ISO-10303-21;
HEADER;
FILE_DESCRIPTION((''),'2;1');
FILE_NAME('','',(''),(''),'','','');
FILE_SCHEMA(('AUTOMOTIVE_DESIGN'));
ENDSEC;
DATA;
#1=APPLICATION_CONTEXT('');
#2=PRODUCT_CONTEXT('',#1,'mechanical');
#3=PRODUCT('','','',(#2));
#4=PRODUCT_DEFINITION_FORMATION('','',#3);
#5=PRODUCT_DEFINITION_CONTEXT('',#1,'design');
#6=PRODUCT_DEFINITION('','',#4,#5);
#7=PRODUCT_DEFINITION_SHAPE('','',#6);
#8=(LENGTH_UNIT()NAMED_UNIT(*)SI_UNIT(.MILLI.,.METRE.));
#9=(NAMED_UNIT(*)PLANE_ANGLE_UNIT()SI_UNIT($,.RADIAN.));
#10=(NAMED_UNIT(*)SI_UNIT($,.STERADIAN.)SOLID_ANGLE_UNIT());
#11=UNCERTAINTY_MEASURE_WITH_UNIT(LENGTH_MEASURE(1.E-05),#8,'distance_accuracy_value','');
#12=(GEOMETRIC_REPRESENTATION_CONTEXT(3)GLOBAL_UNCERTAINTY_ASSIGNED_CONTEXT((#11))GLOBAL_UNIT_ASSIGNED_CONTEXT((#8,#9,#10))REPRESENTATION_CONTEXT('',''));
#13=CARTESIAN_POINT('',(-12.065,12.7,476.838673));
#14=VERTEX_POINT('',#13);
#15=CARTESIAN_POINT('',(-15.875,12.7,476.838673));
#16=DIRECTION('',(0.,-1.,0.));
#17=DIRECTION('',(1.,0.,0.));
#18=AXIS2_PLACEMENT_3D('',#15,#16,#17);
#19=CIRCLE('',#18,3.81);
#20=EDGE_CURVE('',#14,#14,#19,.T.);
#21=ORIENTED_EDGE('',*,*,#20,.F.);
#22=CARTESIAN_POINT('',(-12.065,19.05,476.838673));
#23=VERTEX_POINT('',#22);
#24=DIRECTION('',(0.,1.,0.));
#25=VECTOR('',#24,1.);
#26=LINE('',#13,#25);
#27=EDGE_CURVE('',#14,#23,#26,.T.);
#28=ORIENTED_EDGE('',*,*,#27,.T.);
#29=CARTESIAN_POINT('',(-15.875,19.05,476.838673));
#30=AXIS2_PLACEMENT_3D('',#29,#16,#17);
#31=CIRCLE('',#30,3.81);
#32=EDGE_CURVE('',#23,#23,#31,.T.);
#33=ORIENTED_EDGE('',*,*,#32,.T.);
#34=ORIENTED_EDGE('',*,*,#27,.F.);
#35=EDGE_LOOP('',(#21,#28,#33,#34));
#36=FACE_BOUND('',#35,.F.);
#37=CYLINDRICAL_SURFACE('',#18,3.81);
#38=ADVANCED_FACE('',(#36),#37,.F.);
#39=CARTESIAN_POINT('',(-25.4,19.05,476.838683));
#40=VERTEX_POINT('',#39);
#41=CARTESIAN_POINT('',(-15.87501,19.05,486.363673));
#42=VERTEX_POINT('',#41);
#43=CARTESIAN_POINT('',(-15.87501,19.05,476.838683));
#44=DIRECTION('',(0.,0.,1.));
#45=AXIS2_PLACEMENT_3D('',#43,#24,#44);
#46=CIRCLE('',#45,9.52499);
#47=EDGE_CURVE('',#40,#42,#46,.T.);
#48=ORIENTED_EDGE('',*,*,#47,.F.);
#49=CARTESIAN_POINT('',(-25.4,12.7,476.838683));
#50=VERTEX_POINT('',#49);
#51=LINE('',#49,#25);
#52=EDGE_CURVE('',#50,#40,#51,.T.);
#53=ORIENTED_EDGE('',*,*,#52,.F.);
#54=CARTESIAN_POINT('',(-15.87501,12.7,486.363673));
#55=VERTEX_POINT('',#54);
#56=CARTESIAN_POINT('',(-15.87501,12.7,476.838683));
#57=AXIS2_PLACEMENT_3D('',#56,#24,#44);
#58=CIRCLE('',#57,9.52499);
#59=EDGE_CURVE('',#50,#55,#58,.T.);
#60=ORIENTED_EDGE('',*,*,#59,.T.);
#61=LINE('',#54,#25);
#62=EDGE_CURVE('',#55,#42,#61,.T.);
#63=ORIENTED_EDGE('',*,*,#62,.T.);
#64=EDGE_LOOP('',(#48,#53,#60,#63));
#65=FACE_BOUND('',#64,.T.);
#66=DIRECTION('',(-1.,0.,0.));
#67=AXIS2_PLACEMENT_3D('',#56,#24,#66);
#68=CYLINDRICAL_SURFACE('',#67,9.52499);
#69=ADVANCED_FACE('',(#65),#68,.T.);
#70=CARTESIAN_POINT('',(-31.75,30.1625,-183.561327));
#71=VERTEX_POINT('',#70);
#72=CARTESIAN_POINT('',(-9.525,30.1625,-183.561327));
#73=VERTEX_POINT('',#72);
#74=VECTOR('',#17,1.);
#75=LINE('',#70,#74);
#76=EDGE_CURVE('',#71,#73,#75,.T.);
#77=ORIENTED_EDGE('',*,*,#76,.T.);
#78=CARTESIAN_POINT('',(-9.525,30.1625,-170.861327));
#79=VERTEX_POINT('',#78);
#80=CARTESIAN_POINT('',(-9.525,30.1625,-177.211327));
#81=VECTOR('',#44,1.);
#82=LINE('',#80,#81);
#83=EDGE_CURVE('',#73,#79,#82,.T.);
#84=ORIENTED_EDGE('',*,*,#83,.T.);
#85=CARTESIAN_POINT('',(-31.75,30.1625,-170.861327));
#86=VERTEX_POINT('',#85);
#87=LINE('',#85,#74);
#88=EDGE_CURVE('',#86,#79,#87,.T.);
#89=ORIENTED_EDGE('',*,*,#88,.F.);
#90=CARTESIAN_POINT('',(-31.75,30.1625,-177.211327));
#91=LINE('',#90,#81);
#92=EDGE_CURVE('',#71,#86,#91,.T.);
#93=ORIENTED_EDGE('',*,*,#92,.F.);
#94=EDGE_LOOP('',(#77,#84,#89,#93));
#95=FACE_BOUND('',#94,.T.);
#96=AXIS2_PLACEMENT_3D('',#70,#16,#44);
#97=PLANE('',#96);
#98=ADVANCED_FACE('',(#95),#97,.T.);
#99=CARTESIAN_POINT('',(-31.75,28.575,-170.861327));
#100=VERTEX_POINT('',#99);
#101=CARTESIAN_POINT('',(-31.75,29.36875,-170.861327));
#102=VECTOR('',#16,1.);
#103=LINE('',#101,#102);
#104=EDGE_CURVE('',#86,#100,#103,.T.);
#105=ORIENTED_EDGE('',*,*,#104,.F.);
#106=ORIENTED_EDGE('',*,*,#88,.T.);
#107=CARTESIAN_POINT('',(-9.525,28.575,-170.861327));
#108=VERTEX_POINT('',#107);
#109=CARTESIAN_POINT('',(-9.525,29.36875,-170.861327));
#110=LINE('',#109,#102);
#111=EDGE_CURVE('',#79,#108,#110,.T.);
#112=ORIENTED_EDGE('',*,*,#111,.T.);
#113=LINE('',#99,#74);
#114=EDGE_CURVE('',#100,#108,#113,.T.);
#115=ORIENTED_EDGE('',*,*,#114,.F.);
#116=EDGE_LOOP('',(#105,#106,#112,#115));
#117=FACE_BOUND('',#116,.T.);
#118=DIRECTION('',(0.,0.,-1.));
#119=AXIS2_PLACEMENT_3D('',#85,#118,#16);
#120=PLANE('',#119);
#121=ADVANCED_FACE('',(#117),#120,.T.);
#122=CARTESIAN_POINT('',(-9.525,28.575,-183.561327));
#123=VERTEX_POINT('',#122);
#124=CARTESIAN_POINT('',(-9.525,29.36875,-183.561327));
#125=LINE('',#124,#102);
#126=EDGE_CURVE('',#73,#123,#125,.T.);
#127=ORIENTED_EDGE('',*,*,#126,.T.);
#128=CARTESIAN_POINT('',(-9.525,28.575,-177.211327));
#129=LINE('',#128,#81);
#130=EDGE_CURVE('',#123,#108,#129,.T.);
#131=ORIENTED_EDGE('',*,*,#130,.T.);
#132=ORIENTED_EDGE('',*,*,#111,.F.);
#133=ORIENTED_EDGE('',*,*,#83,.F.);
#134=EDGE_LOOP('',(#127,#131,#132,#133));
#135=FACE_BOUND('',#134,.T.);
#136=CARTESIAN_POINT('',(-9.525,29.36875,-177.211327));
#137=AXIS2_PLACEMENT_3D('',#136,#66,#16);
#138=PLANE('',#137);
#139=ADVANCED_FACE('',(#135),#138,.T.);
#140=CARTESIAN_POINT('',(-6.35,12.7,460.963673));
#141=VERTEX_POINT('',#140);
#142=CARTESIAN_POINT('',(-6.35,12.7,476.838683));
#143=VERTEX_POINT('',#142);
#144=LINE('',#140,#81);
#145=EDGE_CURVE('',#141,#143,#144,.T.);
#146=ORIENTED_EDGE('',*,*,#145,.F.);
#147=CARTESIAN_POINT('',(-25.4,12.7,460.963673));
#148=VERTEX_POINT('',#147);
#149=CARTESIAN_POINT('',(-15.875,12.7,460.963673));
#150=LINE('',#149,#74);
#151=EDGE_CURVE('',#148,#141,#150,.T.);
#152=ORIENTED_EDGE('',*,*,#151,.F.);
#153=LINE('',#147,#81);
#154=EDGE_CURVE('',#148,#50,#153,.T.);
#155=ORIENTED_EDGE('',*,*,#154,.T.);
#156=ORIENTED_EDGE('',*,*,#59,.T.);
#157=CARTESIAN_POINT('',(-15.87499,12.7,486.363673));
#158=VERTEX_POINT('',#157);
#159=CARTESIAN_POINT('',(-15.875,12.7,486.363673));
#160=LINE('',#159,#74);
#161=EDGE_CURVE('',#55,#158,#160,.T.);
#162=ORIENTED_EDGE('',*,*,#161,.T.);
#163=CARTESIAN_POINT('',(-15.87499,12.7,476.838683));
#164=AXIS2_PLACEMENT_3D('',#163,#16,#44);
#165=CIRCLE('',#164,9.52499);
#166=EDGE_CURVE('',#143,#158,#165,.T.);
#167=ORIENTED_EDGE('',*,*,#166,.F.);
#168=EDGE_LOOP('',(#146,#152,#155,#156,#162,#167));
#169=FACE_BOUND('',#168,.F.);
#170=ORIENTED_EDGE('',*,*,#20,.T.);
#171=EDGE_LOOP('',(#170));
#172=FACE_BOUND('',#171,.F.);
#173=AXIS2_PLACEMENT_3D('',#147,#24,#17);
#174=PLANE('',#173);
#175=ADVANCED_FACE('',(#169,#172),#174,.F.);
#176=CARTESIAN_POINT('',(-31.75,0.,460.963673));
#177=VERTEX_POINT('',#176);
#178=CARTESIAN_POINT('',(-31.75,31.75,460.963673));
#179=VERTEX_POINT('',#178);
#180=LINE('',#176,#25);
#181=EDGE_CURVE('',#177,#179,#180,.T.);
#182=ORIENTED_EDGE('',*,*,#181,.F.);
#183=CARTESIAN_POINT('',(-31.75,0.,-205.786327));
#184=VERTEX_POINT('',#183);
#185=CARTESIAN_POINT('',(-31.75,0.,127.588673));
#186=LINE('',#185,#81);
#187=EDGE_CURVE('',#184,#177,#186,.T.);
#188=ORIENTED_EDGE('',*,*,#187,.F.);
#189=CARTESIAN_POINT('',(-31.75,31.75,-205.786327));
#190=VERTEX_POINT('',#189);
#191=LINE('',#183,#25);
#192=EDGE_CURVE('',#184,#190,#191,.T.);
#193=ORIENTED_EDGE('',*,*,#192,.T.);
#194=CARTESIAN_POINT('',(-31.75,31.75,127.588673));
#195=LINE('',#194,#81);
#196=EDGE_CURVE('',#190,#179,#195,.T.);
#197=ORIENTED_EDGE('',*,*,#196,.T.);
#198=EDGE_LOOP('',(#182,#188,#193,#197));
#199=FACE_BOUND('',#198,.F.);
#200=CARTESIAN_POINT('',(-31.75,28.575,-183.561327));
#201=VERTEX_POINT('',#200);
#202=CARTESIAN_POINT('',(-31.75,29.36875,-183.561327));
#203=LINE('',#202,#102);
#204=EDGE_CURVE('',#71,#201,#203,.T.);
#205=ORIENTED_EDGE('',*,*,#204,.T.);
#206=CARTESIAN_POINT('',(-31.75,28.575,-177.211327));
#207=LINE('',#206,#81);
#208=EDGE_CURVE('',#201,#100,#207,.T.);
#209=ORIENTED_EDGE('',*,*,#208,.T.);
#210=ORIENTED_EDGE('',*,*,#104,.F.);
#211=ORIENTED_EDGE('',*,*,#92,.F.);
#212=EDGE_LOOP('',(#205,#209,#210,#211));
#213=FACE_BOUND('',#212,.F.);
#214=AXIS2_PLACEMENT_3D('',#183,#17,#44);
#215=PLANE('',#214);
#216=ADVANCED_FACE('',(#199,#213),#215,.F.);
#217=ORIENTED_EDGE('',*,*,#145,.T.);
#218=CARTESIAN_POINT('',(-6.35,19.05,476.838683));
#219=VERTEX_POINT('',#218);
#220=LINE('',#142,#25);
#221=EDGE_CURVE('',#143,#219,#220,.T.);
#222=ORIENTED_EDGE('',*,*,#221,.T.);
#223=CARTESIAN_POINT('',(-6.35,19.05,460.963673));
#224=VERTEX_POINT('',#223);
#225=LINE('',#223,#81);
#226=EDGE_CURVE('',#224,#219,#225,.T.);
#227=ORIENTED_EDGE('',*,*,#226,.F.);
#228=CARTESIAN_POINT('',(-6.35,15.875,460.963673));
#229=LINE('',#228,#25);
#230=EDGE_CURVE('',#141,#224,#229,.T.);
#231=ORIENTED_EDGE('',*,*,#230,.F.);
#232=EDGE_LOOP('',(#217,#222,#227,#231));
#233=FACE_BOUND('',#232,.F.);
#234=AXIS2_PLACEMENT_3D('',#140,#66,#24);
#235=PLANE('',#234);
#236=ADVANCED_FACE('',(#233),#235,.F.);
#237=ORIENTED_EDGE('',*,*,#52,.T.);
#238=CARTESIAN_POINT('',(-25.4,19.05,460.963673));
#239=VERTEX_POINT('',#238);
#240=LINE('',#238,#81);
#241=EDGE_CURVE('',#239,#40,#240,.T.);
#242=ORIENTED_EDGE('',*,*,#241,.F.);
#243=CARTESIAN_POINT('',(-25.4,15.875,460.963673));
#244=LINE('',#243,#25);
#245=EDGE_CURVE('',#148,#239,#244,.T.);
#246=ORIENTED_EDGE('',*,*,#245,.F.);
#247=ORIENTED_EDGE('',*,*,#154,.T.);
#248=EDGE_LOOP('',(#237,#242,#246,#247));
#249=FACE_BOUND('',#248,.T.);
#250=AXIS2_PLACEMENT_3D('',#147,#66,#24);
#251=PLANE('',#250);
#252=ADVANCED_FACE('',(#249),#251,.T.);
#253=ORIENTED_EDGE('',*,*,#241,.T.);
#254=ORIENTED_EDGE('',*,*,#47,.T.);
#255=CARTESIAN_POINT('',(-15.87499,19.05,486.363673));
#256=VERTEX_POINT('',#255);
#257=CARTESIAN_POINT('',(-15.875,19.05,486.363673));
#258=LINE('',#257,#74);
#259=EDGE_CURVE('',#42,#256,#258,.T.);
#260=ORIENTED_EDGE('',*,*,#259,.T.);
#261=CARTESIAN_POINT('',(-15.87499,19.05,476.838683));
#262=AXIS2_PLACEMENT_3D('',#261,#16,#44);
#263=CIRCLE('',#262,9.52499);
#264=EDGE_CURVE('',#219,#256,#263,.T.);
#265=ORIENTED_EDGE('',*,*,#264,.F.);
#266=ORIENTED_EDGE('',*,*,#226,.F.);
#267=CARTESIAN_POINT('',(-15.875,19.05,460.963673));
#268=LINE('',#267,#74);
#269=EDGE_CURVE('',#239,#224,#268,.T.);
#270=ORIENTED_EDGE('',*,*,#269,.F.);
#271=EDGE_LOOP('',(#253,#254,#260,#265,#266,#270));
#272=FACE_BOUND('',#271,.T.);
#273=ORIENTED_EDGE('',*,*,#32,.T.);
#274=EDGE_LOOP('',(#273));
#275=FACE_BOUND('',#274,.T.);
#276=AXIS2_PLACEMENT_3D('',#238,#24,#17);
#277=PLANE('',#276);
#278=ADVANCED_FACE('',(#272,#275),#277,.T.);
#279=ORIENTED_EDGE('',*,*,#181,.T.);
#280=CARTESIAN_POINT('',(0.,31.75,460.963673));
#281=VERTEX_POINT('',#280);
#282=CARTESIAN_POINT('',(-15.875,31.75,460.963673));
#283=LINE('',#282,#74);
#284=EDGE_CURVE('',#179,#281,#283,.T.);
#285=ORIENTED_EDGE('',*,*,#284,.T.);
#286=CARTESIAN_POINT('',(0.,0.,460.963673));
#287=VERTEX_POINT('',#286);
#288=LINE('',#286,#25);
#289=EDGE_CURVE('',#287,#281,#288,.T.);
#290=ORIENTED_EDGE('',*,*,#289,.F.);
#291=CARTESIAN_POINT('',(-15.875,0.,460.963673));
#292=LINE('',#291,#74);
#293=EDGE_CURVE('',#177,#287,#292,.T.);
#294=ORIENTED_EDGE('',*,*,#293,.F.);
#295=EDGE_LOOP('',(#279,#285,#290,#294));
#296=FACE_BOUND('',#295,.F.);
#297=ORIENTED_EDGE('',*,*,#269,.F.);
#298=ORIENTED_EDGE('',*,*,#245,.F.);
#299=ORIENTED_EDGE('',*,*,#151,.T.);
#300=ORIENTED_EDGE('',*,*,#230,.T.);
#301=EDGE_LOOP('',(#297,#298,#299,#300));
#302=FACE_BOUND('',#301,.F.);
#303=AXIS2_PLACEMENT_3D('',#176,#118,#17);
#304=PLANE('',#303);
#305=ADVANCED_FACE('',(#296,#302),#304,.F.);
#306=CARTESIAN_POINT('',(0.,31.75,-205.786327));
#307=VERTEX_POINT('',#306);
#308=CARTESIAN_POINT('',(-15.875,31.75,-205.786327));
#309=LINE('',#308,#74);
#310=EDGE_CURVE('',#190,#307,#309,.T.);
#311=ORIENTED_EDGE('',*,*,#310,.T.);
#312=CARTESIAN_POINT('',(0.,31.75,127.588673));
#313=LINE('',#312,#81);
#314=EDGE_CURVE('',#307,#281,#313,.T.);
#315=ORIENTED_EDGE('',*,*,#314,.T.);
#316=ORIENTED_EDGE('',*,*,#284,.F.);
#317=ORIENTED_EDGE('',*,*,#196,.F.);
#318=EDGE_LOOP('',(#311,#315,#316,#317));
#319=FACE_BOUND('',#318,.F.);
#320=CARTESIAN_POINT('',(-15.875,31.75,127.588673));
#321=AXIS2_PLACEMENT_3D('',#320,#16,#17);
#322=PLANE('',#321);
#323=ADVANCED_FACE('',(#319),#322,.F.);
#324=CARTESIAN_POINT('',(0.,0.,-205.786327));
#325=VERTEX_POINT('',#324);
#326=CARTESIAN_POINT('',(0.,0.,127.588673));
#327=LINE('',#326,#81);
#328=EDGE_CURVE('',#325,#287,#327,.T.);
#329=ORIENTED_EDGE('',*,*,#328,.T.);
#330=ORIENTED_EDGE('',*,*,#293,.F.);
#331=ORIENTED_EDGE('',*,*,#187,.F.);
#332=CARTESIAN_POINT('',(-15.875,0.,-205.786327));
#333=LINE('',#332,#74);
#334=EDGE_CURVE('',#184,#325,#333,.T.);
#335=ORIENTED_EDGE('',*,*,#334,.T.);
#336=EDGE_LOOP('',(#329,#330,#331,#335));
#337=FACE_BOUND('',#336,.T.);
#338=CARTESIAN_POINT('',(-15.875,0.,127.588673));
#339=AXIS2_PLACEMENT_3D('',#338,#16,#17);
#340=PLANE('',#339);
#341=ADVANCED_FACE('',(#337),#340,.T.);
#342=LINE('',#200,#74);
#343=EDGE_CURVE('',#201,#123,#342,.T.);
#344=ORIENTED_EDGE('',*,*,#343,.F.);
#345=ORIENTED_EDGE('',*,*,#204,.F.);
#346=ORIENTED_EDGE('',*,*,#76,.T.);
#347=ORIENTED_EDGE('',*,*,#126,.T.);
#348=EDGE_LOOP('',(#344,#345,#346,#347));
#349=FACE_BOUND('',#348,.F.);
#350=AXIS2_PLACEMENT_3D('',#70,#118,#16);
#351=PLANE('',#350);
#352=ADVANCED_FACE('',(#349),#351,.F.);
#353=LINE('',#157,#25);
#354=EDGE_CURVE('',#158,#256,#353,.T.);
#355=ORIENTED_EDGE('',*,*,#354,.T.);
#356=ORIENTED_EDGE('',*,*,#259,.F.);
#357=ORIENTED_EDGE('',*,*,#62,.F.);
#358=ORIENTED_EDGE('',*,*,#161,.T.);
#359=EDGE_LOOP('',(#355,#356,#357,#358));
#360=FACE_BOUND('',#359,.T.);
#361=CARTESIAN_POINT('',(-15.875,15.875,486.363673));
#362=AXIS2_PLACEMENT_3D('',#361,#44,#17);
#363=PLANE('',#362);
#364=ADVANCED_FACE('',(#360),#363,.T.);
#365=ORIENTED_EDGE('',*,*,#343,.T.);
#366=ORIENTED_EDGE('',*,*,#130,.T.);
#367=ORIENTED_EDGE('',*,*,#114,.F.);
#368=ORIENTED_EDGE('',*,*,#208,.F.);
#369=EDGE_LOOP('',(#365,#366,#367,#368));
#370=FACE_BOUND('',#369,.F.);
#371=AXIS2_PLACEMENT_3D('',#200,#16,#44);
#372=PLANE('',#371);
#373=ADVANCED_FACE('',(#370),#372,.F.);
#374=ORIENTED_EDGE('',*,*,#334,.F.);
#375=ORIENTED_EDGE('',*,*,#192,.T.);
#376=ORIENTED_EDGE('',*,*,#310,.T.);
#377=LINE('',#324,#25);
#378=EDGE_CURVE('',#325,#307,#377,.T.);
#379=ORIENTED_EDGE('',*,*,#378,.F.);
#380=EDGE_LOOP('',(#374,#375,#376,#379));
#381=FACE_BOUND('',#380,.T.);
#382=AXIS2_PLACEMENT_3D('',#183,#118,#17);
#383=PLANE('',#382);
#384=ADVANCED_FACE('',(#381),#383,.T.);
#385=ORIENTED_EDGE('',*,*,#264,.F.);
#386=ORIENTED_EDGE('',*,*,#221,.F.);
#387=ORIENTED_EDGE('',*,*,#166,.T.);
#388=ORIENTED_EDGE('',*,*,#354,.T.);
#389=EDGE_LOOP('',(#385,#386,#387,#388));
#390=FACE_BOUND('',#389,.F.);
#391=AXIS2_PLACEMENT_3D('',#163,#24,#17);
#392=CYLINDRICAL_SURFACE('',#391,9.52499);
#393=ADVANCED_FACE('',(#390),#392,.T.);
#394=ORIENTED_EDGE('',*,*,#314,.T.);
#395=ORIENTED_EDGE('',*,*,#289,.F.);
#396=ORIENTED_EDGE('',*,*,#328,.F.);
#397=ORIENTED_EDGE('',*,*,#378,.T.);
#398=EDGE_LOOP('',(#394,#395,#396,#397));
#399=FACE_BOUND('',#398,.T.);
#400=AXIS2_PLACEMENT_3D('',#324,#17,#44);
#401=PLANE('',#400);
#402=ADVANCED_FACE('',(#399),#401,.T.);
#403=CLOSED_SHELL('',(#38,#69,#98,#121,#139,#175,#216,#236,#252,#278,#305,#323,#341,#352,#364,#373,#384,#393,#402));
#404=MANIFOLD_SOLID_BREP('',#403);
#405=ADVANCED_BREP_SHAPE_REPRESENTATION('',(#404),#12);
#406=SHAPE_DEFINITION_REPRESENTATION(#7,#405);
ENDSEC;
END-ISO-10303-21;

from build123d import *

# Parameters (mm, degrees)
F0_W     = 31.75
F0_H     = 666.75
F1_DEPTH = 31.75
F2_W     = 19.05
F2_H     = 6.35
F3_DEPTH = 25.4
F4_R     = 9.52499
F5_R     = 3.81
F6_DEPTH = 6.35
F7_W     = 1.5875
F7_H     = 12.7
F8_DEPTH = 22.225


# Not quite as in the source:
# - a fillet or chamfer is up to 0.001 mm smaller than in the source, because OpenCascade refuses the exact size


with BuildPart() as f1:
    # F0 (on Front) → F1 (new body)
    with BuildSketch(Plane.XZ):
        with Locations((-15.875, 127.5886728781)):
            Rectangle(F0_W, F0_H)
    extrude(amount=-F1_DEPTH)

    # F2 (on face) → F3 (join)
    with BuildSketch(Plane.XY.offset(460.9636728781)):
        with Locations((-15.875, 15.875)):
            Rectangle(F2_W, F2_H)
    extrude(amount=F3_DEPTH)

    # F4 (radius 9.525 in the source; OpenCascade refuses exactly that, so slightly less here)
    f4_edges = [f1.edges().sort_by_distance(p)[0] for p in [
        (-6.35, 15.875, 486.363673),
        (-25.4, 15.875, 486.363673),
    ]]
    fillet(f4_edges, radius=F4_R)

    # F5 (on face) → F6 (cut)
    with BuildSketch(Plane.XZ.offset(-12.7)):
        with Locations((-15.875, 476.8386728781)):
            Circle(F5_R)
    extrude(amount=-F6_DEPTH, mode=Mode.SUBTRACT)

    # F7 (on face) → F8 (cut)
    with BuildSketch(Plane(origin=(-31.75, 0, 0), x_dir=(0, -1, 0), z_dir=(-1, 0, 0))):
        with Locations((-29.36875, -177.2113271219)):
            Rectangle(F7_W, F7_H)
    extrude(amount=-F8_DEPTH, mode=Mode.SUBTRACT)


solid = f1.part
